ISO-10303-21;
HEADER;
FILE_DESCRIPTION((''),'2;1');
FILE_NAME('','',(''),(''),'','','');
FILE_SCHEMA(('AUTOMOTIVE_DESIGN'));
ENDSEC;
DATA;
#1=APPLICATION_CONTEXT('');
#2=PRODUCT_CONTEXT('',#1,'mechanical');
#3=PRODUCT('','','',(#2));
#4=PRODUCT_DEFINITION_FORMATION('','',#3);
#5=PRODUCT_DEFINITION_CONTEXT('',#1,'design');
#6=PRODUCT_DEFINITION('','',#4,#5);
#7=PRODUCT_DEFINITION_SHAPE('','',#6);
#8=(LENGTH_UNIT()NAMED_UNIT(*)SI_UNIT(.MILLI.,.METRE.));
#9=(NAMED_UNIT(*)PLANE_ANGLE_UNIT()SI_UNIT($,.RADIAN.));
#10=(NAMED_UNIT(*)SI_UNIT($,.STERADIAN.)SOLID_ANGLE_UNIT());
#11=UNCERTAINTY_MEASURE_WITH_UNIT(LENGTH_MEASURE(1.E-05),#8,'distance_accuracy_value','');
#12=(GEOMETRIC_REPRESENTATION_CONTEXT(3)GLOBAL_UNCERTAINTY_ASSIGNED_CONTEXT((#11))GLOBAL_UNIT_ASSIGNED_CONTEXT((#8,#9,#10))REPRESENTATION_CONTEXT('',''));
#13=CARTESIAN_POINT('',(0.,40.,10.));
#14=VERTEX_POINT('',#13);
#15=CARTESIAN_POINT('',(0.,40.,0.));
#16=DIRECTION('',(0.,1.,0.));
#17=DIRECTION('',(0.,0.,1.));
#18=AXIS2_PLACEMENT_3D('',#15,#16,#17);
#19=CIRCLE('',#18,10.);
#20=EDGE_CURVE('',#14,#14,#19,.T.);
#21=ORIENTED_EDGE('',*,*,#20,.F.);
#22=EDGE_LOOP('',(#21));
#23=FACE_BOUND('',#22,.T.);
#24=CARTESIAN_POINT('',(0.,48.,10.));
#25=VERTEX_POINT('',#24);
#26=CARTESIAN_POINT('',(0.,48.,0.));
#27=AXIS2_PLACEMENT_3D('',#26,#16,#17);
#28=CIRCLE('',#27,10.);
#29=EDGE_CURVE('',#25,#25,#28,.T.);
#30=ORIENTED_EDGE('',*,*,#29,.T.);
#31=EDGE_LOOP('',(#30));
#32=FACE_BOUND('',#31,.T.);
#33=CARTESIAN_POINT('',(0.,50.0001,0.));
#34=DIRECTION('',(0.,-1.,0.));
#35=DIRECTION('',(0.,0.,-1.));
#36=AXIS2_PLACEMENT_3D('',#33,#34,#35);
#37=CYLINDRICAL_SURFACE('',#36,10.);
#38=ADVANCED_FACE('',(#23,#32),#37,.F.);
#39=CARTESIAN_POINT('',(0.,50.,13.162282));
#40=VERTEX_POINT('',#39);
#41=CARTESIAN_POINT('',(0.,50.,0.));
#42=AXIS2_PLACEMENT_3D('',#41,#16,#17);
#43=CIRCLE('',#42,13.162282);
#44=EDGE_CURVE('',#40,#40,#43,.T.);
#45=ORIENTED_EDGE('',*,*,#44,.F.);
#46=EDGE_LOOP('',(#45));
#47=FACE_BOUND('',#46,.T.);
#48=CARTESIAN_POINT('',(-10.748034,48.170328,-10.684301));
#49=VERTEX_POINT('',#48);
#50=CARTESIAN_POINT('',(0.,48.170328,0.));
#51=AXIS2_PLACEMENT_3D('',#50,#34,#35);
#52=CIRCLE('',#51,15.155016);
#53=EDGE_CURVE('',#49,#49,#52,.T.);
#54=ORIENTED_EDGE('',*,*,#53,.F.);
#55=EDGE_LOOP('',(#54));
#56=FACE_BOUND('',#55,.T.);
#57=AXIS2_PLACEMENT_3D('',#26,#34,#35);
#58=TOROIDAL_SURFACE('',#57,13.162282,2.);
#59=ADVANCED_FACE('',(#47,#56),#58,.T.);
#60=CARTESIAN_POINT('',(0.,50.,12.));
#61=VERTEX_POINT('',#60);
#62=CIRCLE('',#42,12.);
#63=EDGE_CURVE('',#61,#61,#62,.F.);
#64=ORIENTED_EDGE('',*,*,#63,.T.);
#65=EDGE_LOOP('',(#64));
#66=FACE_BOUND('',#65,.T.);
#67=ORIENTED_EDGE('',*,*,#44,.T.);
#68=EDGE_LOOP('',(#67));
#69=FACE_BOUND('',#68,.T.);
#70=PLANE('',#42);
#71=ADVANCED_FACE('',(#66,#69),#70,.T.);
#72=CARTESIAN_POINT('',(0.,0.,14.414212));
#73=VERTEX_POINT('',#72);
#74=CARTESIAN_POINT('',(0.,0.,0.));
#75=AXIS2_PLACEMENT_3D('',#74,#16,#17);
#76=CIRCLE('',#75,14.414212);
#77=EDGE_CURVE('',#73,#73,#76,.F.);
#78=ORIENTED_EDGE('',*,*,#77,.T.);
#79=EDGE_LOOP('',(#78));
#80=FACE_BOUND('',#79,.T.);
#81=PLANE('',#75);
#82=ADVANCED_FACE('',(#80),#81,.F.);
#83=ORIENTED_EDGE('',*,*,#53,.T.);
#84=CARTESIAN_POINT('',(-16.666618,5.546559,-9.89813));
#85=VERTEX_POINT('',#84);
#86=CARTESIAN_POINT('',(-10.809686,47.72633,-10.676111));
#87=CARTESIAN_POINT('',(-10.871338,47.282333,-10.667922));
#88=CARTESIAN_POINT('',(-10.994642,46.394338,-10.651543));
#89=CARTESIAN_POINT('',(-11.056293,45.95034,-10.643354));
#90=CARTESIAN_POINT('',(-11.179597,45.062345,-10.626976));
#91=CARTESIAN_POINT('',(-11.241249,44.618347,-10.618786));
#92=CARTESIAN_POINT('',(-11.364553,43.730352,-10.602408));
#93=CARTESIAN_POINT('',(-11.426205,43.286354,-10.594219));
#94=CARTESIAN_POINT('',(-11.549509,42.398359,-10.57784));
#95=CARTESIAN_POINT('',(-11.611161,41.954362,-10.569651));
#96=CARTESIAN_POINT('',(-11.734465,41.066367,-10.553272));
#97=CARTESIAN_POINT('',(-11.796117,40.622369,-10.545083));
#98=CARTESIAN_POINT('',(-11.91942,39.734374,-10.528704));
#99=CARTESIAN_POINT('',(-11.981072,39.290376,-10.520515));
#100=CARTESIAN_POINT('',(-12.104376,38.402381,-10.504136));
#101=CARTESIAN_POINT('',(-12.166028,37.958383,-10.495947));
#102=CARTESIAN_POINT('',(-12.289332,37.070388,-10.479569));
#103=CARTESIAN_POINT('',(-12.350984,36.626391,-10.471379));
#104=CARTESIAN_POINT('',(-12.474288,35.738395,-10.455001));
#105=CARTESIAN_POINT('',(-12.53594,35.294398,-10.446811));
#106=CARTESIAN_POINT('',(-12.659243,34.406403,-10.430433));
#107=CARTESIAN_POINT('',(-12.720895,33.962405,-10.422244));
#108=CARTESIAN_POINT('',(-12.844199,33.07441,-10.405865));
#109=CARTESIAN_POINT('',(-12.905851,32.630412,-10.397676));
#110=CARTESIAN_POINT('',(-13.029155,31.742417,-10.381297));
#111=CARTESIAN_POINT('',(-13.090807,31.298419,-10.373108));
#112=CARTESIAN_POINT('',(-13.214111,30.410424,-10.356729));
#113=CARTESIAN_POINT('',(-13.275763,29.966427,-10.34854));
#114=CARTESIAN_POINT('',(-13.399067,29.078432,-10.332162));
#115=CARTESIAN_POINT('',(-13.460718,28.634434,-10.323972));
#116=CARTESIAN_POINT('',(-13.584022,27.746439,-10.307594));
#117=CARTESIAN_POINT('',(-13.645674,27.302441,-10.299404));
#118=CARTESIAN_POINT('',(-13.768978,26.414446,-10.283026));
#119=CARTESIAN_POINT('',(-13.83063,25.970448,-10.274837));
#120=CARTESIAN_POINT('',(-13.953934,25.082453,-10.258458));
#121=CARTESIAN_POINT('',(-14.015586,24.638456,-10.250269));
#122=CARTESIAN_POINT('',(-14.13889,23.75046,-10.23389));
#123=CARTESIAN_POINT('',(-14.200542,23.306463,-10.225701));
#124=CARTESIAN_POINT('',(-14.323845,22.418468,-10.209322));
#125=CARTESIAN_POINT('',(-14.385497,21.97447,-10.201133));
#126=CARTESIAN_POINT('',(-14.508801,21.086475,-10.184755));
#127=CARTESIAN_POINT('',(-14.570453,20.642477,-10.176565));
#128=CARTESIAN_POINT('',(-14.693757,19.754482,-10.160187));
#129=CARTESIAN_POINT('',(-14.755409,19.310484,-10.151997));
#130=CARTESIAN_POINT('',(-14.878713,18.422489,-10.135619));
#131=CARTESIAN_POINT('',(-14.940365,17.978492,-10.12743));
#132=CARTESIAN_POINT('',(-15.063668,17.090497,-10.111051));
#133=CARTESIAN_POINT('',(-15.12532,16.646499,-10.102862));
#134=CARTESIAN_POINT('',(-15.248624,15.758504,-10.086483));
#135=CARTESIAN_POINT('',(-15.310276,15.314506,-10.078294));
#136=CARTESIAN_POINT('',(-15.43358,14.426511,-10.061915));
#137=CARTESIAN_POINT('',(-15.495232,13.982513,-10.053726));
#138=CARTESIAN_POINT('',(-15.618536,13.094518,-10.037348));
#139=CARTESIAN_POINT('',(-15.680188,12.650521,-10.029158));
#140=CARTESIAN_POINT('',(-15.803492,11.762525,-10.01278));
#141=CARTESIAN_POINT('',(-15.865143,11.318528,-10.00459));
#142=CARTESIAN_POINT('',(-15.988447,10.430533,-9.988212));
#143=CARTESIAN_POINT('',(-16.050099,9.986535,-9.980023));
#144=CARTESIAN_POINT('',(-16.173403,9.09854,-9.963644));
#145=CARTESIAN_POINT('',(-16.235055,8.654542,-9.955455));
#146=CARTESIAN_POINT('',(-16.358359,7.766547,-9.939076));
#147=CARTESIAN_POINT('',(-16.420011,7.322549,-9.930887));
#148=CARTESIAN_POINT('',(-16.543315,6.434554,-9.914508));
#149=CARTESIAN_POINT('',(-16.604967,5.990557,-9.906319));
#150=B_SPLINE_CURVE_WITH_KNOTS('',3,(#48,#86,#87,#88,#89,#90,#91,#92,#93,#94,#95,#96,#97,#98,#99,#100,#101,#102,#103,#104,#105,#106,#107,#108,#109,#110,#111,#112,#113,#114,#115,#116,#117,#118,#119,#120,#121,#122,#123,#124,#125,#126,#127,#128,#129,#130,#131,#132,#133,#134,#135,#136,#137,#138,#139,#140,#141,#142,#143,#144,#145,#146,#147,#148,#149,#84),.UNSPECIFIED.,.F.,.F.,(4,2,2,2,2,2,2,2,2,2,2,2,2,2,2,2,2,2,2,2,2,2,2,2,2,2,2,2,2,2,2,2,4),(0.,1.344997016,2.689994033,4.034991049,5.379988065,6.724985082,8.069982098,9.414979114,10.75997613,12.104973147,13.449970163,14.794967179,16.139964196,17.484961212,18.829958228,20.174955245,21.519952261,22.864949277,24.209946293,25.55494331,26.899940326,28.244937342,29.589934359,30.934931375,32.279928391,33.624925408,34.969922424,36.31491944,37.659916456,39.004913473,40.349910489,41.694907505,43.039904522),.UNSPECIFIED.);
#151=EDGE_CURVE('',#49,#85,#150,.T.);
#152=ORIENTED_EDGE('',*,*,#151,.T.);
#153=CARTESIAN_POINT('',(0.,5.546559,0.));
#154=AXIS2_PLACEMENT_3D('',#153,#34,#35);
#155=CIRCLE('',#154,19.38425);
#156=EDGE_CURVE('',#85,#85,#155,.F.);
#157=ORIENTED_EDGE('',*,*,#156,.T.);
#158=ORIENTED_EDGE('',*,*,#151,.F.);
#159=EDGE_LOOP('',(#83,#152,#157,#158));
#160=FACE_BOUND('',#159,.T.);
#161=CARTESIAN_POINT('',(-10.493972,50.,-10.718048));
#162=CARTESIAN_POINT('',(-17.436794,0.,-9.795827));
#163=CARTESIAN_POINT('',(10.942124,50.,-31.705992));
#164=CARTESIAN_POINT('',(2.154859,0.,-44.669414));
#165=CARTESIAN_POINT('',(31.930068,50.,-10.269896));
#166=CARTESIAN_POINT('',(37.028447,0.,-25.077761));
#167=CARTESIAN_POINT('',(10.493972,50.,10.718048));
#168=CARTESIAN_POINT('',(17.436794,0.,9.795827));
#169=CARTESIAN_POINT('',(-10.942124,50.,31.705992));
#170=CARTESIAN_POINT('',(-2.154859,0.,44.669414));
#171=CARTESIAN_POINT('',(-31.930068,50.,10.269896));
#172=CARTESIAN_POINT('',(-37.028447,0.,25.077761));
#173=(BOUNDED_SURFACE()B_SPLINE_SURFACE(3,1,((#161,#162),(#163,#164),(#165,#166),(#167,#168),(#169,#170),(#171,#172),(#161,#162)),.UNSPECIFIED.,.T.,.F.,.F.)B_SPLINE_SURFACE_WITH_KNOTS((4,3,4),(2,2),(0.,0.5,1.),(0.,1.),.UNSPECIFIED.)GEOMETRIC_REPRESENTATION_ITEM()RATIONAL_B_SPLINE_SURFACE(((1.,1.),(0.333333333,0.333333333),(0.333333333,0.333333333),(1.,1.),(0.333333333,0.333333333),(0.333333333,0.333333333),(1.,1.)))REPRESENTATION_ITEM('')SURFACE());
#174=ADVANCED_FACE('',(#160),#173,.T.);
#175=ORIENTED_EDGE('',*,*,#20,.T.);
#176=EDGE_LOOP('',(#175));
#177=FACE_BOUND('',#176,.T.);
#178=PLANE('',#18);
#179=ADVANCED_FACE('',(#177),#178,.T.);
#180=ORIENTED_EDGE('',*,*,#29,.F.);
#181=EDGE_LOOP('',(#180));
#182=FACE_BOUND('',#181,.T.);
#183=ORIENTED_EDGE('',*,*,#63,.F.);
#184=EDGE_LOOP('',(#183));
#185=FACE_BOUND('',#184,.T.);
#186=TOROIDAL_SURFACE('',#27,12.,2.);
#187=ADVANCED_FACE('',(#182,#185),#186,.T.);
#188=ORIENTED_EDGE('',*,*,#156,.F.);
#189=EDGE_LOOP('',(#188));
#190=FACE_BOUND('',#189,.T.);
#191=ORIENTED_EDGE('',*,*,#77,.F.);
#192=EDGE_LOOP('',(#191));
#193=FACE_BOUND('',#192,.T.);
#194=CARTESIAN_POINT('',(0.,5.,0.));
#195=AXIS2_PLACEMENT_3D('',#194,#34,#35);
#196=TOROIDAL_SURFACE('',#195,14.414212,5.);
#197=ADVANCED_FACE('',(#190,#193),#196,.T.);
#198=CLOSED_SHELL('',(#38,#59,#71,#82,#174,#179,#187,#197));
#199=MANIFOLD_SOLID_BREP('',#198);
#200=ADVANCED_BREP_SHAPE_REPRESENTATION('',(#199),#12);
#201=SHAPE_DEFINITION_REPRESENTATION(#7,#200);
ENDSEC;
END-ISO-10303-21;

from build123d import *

# Parameters (mm, degrees)
CUT_EXTRUDE1_DEPTH      = 58.445626622
CUT_EXTRUDE1_DEPTH_BACK = 10
SKETCH3_R               = 10
FILLET4_R               = 5
FILLET5_R               = 2


with BuildPart() as part:
    # Loft1: read off the stored shape, not the designer's step
    # Loft1: loft between two sections, ruled curve by curve
    loft1_from = [
        Edge.make_bspline([(-10.493972108, 50, -10.718047835), (10.942123561, 50, -31.705992052), (31.930067778, 50, -10.269896382), (10.493972108, 50, 10.718047835), (-10.942123561, 50, 31.705992052), (-31.930067778, 50, 10.269896382), (-10.493972108, 50, -10.718047835)], [0, 0, 0, 0, 0.5, 0.5, 0.5, 1, 1, 1, 1], 3, [1, 0.333333333, 0.333333333, 1, 0.333333333, 0.333333333, 1]),
    ]
    loft1_to = [
        Edge.make_bspline([(-17.436793853, 0, -9.795826669), (2.154859485, 0, -44.669414375), (37.028447191, 0, -25.077761037), (17.436793853, 0, 9.795826669), (-2.154859485, 0, 44.669414375), (-37.028447191, 0, 25.077761037), (-17.436793853, 0, -9.795826669)], [0, 0, 0, 0, 0.5, 0.5, 0.5, 1, 1, 1, 1], 3, [1, 0.333333333, 0.333333333, 1, 0.333333333, 0.333333333, 1]),
    ]
    loft1 = Solid(Shell([*[Face.make_surface_from_curves(loft1_from[k], loft1_to[k]) for k in range(1)], Face(Wire(loft1_from)), Face(Wire(loft1_to))]))
    add(loft1)

    # Sketch3 → Cut-Extrude1 (cut, two sides: drawn at the far end of the back side and taken through both)
    with BuildSketch(Plane(origin=(0, 50, 0), x_dir=(1, 0, 0), z_dir=(0, 1, 0)).offset(-CUT_EXTRUDE1_DEPTH_BACK)):
        with Locations(Location((0, 0, 0), (0, 0, 270))):
            Circle(SKETCH3_R)
    extrude(amount=CUT_EXTRUDE1_DEPTH + CUT_EXTRUDE1_DEPTH_BACK, mode=Mode.SUBTRACT)

    # Fillet4
    fillet4_edges = [part.edges().sort_by_distance(p)[0] for p in [
        (17.436793853, 0, 9.795826669),
    ]]
    fillet(fillet4_edges, radius=FILLET4_R)

    # Fillet5
    fillet5_edges = [part.edges().sort_by_distance(p)[0] for p in [
        (10.493972108, 50, 10.718047835),
        (0, 50, -10),
    ]]
    fillet(fillet5_edges, radius=FILLET5_R)


solid = part.part
